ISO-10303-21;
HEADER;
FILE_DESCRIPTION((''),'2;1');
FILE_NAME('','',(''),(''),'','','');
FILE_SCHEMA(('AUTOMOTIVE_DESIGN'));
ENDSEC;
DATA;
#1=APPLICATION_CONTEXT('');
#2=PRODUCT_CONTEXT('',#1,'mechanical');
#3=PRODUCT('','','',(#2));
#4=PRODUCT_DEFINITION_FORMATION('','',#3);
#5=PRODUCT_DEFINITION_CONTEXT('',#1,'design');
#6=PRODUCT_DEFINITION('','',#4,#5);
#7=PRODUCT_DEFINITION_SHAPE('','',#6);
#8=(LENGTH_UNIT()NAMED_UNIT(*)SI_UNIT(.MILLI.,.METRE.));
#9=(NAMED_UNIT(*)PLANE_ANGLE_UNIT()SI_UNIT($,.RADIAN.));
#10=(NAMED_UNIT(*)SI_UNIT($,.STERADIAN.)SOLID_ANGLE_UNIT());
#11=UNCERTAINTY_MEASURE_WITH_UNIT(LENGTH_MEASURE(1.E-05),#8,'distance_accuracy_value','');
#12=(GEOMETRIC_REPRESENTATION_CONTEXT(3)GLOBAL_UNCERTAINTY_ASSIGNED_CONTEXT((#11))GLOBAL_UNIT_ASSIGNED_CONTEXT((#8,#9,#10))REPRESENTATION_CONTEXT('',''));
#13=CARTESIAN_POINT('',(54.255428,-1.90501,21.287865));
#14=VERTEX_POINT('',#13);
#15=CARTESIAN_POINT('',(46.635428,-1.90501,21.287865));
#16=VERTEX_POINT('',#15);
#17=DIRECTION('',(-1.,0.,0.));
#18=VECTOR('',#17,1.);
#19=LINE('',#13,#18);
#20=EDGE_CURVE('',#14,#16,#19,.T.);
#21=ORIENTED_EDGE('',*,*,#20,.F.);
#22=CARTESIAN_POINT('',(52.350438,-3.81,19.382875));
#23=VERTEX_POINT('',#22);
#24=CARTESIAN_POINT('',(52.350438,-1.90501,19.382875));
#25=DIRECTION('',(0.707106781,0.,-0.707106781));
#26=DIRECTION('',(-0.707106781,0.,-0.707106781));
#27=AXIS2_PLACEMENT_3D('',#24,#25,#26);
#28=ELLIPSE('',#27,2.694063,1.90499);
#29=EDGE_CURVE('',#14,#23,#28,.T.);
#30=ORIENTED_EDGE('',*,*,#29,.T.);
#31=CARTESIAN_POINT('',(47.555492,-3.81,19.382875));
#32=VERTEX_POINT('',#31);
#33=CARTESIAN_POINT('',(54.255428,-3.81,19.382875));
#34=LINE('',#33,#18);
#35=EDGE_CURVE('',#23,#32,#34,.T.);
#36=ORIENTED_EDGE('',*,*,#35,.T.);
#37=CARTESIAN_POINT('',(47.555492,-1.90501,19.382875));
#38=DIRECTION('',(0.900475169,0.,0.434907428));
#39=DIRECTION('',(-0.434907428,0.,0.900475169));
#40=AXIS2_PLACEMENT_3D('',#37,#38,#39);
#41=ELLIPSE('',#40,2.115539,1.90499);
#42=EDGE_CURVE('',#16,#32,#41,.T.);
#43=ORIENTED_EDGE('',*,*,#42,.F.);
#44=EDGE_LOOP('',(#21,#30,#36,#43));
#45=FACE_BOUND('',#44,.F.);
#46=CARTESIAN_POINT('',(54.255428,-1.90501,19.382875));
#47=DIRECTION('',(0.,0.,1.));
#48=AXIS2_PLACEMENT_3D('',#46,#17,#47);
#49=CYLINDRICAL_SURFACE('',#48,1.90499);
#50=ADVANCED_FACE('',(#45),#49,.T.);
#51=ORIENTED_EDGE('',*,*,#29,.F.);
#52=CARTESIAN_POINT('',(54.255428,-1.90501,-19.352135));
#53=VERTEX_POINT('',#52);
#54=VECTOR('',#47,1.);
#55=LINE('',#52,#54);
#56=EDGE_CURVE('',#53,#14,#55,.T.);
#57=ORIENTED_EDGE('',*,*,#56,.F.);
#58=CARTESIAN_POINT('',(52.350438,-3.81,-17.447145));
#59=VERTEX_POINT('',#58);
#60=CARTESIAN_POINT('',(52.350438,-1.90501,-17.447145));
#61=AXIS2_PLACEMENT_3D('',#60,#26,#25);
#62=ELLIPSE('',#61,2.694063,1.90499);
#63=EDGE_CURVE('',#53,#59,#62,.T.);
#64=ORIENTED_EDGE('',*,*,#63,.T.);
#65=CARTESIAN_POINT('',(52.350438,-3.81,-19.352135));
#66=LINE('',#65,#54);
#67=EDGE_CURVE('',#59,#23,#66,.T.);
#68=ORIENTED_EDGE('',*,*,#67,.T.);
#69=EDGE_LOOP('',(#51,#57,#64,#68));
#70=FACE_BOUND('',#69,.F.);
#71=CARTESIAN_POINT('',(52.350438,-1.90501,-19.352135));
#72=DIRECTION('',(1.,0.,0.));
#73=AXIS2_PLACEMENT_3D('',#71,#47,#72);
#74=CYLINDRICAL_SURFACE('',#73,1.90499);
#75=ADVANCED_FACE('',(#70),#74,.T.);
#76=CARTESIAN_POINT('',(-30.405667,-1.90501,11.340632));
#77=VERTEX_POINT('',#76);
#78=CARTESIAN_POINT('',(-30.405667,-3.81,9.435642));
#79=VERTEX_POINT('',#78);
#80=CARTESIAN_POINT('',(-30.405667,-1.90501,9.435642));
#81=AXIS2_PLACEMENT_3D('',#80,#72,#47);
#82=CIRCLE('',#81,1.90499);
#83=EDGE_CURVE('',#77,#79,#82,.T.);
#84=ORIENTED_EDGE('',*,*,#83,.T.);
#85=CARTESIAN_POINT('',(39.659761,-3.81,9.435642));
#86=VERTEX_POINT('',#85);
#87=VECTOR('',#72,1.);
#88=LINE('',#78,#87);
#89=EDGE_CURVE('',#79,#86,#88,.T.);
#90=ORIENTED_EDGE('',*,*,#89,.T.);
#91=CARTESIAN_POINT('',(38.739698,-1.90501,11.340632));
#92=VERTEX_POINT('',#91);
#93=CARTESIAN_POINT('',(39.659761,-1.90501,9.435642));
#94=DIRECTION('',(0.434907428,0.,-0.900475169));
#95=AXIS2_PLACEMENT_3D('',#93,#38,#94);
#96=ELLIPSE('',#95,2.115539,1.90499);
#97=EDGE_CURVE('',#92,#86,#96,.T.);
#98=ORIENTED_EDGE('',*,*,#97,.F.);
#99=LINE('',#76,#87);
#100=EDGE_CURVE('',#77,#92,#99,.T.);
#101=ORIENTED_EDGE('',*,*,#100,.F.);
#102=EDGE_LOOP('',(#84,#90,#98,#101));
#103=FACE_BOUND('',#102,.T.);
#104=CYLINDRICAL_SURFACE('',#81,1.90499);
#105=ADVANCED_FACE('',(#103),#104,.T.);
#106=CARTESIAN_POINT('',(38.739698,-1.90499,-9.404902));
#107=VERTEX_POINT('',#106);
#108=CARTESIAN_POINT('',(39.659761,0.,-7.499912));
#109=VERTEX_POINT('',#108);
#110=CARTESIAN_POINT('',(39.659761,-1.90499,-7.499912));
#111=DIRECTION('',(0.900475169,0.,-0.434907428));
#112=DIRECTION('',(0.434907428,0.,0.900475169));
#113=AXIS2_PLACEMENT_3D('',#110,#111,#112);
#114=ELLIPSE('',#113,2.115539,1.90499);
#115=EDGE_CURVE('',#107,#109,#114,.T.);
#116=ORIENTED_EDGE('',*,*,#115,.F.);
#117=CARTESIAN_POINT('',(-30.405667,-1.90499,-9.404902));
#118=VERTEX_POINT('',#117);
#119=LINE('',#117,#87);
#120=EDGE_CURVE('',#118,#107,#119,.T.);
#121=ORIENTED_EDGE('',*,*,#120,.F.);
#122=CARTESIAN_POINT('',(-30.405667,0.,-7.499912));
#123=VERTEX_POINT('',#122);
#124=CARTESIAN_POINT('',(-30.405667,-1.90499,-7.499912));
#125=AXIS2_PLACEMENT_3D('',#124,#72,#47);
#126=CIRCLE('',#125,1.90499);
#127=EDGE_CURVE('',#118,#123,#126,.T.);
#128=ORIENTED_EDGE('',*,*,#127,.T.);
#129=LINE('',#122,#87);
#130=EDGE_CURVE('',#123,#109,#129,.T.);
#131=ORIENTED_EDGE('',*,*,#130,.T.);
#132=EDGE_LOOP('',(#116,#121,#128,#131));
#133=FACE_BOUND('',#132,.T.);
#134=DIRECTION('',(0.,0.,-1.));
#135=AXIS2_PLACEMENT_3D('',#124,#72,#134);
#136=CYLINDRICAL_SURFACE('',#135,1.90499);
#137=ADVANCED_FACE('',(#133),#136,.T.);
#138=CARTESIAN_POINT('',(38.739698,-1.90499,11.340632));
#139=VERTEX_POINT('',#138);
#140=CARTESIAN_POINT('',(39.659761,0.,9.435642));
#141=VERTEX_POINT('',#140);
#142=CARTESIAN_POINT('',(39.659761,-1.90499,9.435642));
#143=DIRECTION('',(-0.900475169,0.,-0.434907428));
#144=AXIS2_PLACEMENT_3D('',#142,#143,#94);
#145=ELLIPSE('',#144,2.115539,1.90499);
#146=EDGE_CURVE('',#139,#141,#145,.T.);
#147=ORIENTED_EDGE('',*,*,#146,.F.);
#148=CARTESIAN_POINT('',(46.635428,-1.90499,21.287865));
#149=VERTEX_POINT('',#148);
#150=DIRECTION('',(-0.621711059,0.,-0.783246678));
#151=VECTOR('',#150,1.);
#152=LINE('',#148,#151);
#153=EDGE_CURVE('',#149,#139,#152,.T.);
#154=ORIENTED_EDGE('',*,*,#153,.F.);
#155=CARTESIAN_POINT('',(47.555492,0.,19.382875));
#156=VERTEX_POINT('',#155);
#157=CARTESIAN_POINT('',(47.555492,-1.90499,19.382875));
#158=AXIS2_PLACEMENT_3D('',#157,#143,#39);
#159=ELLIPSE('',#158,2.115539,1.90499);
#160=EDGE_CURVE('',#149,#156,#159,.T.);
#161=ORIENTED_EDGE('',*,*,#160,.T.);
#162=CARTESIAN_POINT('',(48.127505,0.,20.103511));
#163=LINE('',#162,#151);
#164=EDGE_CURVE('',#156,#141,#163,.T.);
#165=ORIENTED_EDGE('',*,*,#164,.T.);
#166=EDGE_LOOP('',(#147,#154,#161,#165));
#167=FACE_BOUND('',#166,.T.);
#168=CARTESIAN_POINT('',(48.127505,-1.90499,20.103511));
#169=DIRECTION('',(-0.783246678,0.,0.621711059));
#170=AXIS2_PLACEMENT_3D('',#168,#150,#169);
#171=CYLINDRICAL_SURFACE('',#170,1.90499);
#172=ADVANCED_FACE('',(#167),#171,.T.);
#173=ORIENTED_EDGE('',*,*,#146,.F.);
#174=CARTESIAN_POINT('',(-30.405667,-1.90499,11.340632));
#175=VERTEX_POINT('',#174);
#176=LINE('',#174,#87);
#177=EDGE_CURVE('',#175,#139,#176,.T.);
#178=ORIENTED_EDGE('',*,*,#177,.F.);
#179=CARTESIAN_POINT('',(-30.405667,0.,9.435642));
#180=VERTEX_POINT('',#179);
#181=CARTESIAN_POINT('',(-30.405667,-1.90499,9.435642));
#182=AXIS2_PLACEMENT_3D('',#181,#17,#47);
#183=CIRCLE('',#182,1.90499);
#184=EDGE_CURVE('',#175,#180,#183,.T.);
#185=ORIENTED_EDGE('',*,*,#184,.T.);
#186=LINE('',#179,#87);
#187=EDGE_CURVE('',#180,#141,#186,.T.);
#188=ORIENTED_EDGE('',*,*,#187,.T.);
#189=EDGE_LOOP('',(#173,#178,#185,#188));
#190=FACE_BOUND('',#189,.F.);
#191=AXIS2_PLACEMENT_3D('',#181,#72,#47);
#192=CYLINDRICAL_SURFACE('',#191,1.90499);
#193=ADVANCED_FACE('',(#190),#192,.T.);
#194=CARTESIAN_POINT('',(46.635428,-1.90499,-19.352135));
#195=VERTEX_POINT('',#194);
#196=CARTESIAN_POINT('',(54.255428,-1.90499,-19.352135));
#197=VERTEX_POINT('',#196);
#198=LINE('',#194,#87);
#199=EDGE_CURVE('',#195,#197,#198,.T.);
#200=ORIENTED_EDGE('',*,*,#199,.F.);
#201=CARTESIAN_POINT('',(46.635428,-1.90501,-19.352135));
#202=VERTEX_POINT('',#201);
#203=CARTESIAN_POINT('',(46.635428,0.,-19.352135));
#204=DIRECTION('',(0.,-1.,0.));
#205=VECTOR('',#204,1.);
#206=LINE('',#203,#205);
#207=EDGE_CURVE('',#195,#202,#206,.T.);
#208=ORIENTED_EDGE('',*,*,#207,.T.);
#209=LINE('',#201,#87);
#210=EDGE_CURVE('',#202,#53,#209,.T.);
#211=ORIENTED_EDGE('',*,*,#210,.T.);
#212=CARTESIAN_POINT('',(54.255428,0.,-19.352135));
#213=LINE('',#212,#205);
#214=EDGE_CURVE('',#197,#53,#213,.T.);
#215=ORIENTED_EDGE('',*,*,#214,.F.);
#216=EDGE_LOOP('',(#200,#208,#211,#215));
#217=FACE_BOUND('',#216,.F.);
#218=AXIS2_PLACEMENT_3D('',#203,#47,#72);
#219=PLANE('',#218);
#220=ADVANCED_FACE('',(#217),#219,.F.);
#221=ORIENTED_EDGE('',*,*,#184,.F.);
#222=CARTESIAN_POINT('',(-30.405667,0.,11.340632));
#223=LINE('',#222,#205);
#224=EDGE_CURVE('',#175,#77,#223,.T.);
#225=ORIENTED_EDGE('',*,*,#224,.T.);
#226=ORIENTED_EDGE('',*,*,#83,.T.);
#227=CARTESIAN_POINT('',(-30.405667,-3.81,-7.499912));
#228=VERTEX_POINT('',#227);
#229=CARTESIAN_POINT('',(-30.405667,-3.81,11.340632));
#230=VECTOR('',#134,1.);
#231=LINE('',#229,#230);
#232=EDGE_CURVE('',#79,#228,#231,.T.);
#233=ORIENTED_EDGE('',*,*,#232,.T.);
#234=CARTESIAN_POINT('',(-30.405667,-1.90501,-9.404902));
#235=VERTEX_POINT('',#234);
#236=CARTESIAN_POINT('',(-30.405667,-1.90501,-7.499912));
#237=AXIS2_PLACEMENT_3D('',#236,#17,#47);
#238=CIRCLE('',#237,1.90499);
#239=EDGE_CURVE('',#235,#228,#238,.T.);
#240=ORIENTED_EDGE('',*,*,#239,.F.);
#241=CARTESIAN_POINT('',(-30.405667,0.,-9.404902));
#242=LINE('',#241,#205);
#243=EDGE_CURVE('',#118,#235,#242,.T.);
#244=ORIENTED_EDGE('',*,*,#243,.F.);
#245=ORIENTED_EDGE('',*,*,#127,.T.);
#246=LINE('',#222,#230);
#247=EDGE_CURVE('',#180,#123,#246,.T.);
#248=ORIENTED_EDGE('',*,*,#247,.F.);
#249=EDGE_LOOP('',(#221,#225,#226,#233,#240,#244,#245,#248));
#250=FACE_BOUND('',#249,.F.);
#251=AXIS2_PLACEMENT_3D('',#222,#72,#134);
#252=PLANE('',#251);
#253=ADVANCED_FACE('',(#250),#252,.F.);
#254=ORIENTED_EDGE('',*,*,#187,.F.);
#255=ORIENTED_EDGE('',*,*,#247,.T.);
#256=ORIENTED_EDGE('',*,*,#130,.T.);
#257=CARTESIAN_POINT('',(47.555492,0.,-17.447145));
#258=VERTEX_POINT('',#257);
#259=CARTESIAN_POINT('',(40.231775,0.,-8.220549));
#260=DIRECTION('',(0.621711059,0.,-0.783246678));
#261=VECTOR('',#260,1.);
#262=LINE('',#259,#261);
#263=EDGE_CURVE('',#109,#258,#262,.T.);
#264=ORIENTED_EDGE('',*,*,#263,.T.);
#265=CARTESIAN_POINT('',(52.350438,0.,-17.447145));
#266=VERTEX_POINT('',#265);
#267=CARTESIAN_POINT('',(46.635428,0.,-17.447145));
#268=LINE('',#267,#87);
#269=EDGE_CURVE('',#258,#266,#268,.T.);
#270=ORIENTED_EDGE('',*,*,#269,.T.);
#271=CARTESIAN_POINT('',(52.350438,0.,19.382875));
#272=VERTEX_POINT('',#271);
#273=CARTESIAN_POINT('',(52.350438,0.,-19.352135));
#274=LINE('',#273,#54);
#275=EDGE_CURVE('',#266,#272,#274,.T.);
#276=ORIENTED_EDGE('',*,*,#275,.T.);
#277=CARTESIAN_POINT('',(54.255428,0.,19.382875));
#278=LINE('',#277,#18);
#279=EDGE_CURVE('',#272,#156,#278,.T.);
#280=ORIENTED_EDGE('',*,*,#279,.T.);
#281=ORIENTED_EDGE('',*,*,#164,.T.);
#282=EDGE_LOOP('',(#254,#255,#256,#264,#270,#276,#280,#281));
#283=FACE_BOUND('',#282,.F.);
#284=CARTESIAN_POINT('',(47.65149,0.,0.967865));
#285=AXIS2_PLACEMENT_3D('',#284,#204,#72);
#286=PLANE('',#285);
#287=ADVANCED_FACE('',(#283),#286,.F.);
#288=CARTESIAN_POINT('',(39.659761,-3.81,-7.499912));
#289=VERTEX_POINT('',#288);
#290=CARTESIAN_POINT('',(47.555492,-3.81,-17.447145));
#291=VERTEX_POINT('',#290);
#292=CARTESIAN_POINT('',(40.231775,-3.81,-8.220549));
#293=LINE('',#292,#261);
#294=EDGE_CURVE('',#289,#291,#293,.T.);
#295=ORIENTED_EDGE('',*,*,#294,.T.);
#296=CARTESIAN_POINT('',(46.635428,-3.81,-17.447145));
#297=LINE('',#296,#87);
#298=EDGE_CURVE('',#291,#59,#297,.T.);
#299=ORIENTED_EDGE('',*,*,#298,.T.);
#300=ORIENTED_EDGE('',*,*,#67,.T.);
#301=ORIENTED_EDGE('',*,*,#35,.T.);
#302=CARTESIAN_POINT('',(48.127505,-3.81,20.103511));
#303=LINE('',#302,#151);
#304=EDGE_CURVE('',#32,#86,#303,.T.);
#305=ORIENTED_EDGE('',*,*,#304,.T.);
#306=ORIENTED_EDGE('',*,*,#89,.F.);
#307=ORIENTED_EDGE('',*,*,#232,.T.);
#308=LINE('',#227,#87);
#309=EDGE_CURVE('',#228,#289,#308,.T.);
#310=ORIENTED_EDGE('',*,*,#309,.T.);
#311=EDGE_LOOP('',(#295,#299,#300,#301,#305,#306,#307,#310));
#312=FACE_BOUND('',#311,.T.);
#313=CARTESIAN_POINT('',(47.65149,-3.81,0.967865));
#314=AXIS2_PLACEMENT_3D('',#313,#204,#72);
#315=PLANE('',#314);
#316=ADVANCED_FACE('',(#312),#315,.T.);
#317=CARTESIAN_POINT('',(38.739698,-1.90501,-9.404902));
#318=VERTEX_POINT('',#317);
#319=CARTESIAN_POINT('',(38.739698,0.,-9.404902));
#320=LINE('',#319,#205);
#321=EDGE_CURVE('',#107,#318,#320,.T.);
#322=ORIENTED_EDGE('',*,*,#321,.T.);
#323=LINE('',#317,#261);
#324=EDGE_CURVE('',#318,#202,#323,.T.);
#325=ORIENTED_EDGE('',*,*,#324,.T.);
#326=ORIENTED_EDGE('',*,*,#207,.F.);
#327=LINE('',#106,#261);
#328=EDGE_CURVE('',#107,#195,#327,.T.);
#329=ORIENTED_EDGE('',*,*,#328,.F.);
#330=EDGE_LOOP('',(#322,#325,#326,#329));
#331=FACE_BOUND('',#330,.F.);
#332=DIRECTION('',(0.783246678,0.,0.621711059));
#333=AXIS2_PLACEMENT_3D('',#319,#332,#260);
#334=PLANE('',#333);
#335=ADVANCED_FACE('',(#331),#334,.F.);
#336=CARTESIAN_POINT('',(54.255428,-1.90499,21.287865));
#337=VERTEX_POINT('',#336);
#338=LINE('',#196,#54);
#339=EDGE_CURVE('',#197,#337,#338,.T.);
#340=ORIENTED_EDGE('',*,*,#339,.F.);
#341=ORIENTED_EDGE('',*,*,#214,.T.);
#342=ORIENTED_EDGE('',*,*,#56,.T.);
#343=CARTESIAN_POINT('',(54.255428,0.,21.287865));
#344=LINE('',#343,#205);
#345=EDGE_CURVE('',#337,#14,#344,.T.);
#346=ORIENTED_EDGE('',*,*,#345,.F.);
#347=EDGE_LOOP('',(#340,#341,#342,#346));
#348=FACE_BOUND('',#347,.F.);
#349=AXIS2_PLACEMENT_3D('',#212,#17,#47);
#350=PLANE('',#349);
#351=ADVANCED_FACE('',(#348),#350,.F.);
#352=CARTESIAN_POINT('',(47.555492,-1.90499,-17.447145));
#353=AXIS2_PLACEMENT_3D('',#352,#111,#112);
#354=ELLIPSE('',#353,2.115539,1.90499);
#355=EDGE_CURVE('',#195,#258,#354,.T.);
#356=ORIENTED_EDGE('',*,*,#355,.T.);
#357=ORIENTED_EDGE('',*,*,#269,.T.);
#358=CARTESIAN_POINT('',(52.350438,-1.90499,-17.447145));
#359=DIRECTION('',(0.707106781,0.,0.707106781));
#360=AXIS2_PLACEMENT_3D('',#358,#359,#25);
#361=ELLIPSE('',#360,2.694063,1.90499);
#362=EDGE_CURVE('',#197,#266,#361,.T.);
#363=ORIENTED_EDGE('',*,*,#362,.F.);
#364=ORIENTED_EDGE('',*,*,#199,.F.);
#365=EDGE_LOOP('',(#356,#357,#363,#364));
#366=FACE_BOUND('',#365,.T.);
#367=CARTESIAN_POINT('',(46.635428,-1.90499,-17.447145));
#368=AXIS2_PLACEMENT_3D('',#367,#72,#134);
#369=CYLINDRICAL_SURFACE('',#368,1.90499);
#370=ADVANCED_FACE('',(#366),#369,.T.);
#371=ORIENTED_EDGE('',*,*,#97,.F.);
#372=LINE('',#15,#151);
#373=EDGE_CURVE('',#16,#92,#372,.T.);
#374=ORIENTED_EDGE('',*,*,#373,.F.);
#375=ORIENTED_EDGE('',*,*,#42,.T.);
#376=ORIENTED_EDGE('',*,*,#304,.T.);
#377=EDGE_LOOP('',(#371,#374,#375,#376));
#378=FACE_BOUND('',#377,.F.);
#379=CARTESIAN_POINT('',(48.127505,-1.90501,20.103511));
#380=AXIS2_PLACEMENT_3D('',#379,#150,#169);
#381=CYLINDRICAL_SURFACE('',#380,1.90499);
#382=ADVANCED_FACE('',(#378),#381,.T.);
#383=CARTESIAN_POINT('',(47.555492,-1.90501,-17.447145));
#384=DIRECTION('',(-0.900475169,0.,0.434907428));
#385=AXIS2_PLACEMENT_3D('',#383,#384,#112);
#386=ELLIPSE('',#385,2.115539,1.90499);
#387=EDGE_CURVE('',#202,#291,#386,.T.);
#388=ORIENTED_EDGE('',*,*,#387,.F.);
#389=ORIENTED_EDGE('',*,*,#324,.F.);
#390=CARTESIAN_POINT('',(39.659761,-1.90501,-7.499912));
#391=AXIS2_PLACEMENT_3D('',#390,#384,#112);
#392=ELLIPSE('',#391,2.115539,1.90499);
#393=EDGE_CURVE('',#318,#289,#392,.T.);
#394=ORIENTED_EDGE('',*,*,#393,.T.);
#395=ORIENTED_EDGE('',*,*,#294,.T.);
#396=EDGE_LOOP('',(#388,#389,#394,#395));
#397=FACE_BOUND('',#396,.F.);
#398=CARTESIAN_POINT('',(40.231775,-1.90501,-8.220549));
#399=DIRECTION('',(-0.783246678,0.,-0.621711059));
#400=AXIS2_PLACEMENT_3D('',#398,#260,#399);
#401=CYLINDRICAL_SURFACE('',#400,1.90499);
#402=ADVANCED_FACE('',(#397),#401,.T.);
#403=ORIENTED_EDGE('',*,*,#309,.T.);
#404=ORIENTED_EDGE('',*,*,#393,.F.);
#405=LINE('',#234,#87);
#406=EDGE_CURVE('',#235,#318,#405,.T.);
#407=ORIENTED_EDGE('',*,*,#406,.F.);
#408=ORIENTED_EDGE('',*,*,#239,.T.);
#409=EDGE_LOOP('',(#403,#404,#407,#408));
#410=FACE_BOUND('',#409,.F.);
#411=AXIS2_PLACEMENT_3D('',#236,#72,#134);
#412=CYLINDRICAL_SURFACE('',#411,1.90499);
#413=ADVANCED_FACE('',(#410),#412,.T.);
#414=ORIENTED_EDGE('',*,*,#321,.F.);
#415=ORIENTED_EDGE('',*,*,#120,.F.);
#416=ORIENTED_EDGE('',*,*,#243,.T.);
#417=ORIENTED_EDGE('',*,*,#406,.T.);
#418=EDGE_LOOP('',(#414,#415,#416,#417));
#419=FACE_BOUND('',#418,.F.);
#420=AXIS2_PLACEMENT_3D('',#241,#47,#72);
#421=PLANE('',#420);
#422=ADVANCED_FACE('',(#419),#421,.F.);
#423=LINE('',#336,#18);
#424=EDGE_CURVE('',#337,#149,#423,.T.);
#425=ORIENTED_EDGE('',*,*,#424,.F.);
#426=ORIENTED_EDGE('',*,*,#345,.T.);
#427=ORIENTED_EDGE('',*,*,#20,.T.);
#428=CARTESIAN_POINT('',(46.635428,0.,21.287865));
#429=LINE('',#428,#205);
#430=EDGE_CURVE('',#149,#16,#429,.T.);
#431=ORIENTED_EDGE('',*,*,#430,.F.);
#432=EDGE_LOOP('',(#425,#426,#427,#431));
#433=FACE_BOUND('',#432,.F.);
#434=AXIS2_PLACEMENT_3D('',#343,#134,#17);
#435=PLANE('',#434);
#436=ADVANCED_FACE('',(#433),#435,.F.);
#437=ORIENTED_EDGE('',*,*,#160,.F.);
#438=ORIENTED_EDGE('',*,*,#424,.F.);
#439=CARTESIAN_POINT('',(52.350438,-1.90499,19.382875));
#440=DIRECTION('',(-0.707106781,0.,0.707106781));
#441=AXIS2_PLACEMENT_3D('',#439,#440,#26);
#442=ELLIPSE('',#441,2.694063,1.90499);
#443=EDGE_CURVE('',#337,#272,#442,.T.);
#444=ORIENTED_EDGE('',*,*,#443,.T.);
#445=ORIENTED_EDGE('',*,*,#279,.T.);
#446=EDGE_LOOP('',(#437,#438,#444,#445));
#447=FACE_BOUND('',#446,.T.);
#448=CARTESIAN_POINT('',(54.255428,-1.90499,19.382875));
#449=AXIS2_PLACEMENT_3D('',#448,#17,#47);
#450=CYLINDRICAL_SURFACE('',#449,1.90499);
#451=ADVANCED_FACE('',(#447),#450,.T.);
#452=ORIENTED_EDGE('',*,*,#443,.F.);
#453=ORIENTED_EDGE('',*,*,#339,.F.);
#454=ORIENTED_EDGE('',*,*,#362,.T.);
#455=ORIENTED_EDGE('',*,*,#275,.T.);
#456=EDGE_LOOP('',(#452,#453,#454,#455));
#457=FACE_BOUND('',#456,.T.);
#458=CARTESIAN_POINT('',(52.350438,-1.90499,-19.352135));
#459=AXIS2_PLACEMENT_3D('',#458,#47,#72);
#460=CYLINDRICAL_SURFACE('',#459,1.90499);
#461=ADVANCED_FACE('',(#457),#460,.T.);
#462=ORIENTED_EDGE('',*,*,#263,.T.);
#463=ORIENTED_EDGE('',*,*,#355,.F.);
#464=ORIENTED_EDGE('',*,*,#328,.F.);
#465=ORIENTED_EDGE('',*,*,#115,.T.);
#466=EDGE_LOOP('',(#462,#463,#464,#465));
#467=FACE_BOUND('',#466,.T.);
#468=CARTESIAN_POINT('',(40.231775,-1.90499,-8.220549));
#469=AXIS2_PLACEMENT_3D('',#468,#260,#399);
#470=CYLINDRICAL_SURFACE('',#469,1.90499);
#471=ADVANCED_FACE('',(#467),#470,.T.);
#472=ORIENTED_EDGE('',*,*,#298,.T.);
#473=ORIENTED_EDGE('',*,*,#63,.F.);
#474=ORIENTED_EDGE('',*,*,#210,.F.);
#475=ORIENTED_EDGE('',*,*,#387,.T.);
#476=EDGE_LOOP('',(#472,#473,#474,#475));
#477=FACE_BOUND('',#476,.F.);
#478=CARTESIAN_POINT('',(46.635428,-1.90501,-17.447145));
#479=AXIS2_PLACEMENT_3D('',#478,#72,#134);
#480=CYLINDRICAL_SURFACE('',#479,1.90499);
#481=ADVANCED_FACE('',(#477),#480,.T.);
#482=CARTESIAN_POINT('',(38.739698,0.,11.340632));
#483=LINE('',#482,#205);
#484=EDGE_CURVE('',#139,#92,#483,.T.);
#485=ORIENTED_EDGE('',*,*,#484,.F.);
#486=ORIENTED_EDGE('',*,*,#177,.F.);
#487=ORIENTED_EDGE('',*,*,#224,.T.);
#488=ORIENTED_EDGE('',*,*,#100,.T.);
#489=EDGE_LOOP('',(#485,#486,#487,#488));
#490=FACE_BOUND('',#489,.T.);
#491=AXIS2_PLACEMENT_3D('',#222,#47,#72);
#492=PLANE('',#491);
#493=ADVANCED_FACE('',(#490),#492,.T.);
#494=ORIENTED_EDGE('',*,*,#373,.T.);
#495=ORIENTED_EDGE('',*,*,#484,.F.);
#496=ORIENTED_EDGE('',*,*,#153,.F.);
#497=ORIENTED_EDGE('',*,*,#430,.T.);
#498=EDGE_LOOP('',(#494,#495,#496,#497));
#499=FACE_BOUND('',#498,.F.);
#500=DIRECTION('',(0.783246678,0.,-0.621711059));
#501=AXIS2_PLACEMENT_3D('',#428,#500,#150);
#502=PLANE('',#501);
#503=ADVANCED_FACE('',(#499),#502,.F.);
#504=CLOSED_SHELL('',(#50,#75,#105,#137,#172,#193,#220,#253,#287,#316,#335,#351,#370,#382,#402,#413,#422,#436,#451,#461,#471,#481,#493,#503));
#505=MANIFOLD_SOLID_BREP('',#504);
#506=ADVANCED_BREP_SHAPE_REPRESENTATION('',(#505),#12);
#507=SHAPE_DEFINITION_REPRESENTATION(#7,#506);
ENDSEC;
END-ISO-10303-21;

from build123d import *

# Parameters (mm, degrees)
F0_W     = 69.1453650223
F0_H     = 11.3406319083
F0_H_2   = 9.4049024593
F1_DEPTH = 3.81
F2_R     = 1.90499


# Not quite as in the source:
# - a fillet or chamfer is up to 0.001 mm smaller than in the source, because OpenCascade refuses the exact size


with BuildPart() as f1:
    # F0 (on Front) → F1 (new body)
    with BuildSketch(Plane.XZ):
        Polygon((46.6354282098, 21.2878647245), (38.7396977623, 11.3406319083), (38.7396977623, 0), (38.7396977623, -9.4049024593), (46.6354282098, -19.3521352755), (54.2554282098, -19.3521352755), (54.2554282098, 21.2878647245), align=None)
        with Locations((4.1670152511, 5.6703159541)):
            Rectangle(F0_W, F0_H)
        with Locations((4.1670152511, -4.7024512296)):
            Rectangle(F0_W, F0_H_2)
    extrude(amount=F1_DEPTH)

    # F2 (radius 1.905 in the source; OpenCascade refuses exactly that, so slightly less here)
    f2_edges = [f1.edges().sort_by_distance(p)[0] for p in [
        (4.167015, 0, -9.404902),
        (4.167015, 0, 11.340632),
        (4.167015, -3.81, -9.404902),
        (4.167015, -3.81, 11.340632),
        (50.445428, -3.81, -19.352135),
        (50.445428, 0, -19.352135),
        (50.445428, 0, 21.287865),
        (50.445428, -3.81, 21.287865),
        (54.255428, -3.81, 0.967865),
        (54.255428, 0, 0.967865),
        (42.687563, -3.81, 16.314248),
        (42.687563, -3.81, -14.378519),
        (42.687563, 0, -14.378519),
        (42.687563, 0, 16.314248),
    ]]
    fillet(f2_edges, radius=F2_R)


solid = f1.part
